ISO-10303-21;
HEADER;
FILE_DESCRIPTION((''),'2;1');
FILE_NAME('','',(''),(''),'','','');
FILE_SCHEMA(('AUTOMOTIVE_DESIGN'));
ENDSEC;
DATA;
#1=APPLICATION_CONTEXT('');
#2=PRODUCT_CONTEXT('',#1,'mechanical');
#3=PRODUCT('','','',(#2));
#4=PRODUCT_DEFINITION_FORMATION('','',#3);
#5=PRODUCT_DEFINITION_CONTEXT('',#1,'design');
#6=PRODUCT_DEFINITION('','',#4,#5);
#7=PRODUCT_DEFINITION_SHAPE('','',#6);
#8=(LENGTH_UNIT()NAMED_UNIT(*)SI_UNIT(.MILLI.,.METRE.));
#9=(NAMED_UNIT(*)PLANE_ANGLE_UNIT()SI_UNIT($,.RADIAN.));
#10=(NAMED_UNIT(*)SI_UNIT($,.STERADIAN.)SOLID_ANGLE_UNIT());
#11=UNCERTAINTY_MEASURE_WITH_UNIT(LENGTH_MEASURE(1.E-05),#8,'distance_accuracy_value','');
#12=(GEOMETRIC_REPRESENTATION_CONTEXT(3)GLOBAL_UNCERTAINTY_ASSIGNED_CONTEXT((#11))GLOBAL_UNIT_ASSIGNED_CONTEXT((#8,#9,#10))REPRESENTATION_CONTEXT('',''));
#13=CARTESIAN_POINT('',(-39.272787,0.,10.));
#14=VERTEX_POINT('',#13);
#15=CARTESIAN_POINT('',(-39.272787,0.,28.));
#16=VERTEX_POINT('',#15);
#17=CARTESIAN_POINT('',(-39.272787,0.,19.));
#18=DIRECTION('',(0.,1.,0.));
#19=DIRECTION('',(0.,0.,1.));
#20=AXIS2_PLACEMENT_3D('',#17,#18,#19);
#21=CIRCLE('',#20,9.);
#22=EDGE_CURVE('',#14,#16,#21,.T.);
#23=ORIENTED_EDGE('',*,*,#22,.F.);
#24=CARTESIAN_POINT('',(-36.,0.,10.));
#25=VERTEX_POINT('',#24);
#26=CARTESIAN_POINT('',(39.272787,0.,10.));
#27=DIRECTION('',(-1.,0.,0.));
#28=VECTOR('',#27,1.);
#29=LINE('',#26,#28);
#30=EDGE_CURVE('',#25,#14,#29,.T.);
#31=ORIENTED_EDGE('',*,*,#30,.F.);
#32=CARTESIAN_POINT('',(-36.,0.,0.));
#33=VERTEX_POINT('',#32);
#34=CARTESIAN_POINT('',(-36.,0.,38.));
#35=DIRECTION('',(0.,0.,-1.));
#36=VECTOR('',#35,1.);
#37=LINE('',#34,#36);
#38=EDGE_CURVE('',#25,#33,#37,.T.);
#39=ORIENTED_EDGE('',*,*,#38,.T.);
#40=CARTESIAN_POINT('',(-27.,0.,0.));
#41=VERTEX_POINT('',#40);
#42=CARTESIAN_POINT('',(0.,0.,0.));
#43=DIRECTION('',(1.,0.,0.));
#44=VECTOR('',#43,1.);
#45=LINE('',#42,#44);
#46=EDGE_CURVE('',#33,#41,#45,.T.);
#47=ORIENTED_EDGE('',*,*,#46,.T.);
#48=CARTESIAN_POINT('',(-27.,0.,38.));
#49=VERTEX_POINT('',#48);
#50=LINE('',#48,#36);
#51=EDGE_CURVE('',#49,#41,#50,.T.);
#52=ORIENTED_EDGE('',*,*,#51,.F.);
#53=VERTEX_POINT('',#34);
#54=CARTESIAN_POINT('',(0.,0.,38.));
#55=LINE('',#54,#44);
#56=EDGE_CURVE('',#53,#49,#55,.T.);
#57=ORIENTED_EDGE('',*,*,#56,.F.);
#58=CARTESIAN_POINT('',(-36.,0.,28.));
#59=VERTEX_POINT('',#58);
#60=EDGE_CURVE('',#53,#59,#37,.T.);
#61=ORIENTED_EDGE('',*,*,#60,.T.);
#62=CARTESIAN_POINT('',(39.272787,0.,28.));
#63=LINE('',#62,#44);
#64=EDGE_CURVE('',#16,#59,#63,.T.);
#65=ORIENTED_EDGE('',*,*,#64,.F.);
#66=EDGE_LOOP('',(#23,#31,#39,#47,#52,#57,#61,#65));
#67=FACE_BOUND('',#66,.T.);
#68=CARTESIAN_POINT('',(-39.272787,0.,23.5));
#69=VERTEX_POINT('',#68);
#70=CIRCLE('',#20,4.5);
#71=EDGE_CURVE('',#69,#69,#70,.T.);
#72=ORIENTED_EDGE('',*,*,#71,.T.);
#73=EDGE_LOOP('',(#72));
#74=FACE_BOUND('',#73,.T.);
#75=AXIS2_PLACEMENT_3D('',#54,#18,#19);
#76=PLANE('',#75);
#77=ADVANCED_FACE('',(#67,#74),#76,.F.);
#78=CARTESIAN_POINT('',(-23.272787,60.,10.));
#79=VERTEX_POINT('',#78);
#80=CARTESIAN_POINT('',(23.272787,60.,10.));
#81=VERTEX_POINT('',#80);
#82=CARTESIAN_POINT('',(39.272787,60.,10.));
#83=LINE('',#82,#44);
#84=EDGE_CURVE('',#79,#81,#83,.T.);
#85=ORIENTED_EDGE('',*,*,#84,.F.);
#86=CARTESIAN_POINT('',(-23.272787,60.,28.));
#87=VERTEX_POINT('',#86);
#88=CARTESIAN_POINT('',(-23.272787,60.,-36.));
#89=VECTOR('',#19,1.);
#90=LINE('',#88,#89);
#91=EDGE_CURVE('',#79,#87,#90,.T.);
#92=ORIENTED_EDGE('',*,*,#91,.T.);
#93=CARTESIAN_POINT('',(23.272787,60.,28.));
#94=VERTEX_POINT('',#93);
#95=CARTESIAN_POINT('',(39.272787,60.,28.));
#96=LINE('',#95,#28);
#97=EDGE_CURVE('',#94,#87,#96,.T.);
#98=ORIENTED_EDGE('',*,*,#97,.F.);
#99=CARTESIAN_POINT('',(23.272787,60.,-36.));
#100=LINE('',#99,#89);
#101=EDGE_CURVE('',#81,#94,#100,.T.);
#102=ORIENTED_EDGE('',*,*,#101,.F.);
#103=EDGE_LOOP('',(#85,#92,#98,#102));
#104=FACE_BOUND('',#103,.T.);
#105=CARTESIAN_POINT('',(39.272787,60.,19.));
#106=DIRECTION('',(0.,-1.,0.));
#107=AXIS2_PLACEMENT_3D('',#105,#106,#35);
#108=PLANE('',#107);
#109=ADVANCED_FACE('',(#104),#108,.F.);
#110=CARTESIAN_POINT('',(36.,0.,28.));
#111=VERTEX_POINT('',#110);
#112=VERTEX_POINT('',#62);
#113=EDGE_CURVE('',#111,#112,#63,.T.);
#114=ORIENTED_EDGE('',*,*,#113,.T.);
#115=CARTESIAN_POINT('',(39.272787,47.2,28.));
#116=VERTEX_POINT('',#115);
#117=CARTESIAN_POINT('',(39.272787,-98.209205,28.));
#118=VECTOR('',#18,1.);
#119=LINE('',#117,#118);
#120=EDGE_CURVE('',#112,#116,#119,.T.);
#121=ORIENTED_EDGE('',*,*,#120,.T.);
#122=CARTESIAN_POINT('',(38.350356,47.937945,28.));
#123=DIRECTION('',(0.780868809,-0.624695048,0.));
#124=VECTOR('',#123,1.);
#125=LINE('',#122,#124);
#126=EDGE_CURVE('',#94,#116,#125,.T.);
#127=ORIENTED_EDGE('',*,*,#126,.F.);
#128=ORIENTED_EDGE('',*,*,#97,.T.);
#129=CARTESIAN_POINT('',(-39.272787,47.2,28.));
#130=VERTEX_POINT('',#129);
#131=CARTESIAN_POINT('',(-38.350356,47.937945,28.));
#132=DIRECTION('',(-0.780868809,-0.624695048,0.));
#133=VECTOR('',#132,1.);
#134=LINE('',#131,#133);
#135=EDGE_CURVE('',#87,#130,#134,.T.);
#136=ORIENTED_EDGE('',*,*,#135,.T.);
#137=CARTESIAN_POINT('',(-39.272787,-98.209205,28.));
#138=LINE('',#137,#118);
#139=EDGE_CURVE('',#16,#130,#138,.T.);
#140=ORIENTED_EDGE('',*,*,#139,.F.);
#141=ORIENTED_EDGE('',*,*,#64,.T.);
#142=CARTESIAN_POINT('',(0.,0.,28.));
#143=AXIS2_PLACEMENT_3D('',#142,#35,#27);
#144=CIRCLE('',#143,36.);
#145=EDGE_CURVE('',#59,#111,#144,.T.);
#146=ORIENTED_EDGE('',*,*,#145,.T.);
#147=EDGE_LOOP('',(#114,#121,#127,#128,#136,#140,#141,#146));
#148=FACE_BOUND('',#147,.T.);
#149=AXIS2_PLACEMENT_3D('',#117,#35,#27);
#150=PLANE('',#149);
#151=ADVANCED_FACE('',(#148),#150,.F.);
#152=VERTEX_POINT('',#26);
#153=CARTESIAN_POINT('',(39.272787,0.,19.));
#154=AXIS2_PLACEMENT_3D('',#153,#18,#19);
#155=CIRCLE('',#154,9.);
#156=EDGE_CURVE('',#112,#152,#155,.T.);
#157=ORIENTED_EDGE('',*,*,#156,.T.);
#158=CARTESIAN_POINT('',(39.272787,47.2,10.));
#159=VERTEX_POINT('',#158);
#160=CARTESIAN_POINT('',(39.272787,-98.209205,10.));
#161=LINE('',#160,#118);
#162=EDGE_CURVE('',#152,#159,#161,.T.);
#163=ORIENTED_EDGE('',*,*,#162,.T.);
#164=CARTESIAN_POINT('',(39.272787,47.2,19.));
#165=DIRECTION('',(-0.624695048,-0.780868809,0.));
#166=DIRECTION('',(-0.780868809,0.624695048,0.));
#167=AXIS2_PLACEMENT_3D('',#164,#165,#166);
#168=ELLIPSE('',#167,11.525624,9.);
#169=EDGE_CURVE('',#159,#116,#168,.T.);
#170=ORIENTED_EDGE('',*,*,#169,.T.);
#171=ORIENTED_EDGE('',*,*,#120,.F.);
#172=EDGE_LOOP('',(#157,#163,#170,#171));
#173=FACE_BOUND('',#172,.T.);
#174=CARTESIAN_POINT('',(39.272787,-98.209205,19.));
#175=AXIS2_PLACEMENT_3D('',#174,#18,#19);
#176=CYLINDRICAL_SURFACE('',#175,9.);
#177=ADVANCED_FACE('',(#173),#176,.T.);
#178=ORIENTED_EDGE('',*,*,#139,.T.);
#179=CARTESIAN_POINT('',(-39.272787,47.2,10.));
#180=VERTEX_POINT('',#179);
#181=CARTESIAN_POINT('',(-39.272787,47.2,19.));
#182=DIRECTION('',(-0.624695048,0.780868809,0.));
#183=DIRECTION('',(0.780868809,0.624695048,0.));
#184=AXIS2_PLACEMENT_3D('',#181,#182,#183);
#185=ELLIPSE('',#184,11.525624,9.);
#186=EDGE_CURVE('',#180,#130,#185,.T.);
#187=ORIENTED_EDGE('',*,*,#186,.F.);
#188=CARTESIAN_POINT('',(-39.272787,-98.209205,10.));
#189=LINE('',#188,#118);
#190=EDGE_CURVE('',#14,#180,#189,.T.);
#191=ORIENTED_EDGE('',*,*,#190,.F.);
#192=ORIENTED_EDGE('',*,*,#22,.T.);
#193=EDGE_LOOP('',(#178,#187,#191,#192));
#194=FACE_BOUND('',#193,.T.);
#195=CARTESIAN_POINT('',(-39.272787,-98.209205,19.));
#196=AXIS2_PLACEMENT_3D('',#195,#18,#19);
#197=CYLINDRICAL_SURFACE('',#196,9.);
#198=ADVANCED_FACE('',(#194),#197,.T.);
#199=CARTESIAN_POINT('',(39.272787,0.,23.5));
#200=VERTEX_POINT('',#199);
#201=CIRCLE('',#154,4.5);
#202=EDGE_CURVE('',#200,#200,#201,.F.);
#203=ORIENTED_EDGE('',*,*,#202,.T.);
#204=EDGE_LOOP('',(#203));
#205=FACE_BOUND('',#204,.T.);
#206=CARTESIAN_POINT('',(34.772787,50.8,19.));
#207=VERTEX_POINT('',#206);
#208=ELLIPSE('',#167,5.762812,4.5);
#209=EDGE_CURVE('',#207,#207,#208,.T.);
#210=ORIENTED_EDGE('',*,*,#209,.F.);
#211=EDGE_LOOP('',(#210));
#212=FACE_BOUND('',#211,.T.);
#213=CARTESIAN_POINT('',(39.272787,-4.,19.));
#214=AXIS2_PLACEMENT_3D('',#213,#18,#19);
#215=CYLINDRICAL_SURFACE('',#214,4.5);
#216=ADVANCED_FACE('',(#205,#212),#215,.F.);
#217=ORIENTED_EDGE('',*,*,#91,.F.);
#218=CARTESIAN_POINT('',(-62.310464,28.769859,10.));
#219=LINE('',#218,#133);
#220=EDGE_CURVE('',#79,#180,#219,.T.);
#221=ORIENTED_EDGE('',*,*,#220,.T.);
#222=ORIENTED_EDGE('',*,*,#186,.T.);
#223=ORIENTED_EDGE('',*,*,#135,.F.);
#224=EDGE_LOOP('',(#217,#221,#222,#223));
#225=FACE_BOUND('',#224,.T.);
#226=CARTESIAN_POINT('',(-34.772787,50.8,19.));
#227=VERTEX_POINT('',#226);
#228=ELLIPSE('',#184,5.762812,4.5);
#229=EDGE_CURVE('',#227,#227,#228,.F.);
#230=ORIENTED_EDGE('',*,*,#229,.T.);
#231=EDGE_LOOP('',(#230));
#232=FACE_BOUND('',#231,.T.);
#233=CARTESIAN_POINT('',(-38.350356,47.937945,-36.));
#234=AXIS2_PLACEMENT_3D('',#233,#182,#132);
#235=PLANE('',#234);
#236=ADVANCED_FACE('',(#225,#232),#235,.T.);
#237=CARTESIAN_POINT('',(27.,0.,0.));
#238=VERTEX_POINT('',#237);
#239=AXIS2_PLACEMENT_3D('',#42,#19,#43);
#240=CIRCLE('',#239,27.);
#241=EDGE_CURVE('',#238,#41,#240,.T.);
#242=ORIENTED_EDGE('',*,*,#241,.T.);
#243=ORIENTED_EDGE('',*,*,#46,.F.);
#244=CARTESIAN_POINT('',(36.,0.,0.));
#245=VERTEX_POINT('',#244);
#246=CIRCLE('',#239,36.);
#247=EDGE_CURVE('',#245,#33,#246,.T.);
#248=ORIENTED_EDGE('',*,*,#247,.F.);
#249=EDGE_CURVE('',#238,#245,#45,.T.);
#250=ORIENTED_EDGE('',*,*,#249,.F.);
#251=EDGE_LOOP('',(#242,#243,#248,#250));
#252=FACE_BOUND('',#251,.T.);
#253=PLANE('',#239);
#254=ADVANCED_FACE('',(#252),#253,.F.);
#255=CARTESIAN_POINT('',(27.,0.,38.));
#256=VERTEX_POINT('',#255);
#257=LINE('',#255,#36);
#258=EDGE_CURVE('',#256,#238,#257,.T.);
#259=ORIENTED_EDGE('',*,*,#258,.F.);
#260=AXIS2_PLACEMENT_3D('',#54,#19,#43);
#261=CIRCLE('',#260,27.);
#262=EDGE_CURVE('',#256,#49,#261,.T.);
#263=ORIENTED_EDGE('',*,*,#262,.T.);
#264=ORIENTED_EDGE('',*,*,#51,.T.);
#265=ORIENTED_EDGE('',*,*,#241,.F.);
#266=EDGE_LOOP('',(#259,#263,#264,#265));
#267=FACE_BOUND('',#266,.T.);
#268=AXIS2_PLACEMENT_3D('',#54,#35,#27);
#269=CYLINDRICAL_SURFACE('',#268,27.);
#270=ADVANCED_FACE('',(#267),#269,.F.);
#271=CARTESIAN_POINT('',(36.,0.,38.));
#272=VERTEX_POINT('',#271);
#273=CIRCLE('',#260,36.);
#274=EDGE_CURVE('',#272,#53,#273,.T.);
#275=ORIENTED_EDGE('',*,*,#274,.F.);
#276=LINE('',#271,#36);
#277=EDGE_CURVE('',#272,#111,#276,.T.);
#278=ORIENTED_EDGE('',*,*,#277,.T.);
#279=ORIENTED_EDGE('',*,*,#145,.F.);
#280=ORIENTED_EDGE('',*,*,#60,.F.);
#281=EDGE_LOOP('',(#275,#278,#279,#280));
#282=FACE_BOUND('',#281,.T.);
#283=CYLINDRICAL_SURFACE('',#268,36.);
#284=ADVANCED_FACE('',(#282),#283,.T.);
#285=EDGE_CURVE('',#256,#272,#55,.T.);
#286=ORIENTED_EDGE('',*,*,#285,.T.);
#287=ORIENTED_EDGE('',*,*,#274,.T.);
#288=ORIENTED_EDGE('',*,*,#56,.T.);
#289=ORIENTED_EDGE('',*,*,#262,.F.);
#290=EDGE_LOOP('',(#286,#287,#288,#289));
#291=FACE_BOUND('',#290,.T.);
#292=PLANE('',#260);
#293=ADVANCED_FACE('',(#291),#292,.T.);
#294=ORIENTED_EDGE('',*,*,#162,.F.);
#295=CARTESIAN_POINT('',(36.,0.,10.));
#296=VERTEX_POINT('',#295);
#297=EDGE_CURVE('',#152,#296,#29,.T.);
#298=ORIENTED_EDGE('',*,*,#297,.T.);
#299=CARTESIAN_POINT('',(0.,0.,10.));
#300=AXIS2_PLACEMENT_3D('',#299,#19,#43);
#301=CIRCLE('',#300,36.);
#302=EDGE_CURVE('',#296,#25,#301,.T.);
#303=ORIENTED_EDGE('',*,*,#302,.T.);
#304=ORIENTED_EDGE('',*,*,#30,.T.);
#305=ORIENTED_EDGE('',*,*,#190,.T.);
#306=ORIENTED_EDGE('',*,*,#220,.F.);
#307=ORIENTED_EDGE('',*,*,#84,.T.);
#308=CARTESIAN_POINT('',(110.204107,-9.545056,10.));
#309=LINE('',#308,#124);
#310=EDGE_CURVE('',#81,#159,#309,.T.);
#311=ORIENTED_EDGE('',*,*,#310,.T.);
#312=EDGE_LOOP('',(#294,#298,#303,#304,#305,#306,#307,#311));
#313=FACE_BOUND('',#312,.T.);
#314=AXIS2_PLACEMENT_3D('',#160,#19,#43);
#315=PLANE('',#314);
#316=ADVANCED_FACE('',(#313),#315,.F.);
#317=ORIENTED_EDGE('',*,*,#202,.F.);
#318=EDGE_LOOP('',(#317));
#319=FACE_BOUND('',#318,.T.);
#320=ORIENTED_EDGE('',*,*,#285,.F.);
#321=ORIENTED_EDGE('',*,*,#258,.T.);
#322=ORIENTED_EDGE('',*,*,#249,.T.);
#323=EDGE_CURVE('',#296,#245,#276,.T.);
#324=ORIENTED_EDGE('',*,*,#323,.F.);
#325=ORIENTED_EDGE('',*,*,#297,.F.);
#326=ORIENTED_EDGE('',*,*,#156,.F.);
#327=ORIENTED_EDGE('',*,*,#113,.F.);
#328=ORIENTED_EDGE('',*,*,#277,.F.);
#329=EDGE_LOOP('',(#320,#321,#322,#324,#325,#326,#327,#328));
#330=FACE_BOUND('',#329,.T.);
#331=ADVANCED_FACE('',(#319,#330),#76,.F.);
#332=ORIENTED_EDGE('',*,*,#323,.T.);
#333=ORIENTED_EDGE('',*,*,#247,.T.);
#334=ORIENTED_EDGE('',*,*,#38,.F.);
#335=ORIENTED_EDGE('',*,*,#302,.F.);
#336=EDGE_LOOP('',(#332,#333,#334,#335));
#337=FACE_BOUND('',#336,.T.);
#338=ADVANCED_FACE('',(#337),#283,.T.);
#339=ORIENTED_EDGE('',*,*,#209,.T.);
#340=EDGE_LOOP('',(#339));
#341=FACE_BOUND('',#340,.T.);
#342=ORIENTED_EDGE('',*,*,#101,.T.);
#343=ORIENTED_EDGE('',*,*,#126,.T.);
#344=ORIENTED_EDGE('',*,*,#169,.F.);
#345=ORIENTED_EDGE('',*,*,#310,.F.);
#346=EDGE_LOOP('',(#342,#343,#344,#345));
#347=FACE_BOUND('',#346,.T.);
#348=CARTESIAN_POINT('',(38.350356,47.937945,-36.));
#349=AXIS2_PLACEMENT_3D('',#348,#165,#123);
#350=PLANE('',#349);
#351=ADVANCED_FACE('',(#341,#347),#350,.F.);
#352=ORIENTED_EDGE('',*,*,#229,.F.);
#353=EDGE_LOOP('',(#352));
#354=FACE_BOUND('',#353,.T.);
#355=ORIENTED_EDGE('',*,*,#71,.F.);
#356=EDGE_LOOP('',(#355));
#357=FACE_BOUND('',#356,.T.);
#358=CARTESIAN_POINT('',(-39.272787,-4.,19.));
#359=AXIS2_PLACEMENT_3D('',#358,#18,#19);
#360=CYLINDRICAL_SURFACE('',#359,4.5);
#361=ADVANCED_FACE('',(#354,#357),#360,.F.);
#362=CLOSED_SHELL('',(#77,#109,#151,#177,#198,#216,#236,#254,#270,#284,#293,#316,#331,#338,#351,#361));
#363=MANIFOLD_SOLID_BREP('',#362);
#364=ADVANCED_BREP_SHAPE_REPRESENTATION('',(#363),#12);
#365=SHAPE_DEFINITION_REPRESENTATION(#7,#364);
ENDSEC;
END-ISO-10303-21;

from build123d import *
from build123d.topology import SkipClean

# Parameters (mm, degrees)
BOSS_EXTRUDE1_DEPTH = 38
BOSS_EXTRUDE2_REACH = 81.624
CUT_EXTRUDE1_START  = -38
SKETCH3_R           = 27
CUT_EXTRUDE1_DEPTH  = 38
SKETCH4_R           = 4.5
CUT_EXTRUDE2_DEPTH  = 64
CUT_EXTRUDE3_DEPTH  = 64


with BuildPart() as part:
    # Sketch1 → Boss-Extrude1 (new body)
    with BuildSketch(Plane.XY):
        with BuildLine():
            ThreePointArc((36, 0), (0, 36), (-36, 0))
            Line((-36, 0), (-27, 0))
            ThreePointArc((-27, 0), (0, 27), (27, 0))
            Line((27, 0), (36, 0))
        make_face()
    extrude(amount=BOSS_EXTRUDE1_DEPTH)

    # Boss-Extrude2: up to this face of the body (flat: up to its plane)
    boss_extrude2_end = Plane(part.part.faces().sort_by_distance((31.5, 0, 19))[0])
    # Sketch2 → Boss-Extrude2 (add, up to the picked face)
    with BuildSketch(Plane(origin=(0, 60, 0), x_dir=(-1, 0, 0), z_dir=(0, -1, 0)), mode=Mode.PRIVATE) as boss_extrude2_sk1:
        with BuildLine():
            Line((-39.272787465, -10), (39.272787465, -10))
            ThreePointArc((39.272787465, -10), (48.272787465, -19), (39.272787465, -28))
            Line((39.272787465, -28), (-39.272787465, -28))
            ThreePointArc((-39.272787465, -28), (-48.272787465, -19), (-39.272787465, -10))
        make_face()
    boss_extrude2_tool1 = split(extrude(boss_extrude2_sk1.sketch, amount=BOSS_EXTRUDE2_REACH, mode=Mode.PRIVATE), bisect_by=boss_extrude2_end, keep=Keep.BOTH, mode=Mode.PRIVATE)
    add(boss_extrude2_tool1.solids().sort_by(Axis((0, 60, 19), (0, -1, 0)))[0])

    # Sketch3 → Cut-Extrude1 (cut)
    with SkipClean():  # the faces are left unmerged after this step: merging them gives an invalid solid
        with BuildSketch(Plane.XY.offset(28).offset(CUT_EXTRUDE1_START)):
            Circle(SKETCH3_R)
        extrude(amount=CUT_EXTRUDE1_DEPTH, mode=Mode.SUBTRACT)
    add(part.part.scale(1), mode=Mode.REPLACE)  # the faces are merged on a copy

    # Sketch4 → Cut-Extrude2 (cut)
    with BuildSketch(Plane(origin=(0, 60, 0), x_dir=(1, 0, 0), z_dir=(0, 1, 0))):
        with Locations(Location((-39.272787465, -19, 0), (0, 0, 270))):
            Circle(SKETCH4_R)
    cut_extrude2 = extrude(amount=-CUT_EXTRUDE2_DEPTH, mode=Mode.SUBTRACT)

    # Mirror1: Cut-Extrude2 across plane
    add(cut_extrude2.mirror(Plane(origin=(0, 0, 0), x_dir=(0, 0, 1), z_dir=(1, 0, 0))), mode=Mode.SUBTRACT)

    # Sketch6 → Cut-Extrude3 (cut)
    with BuildSketch(Plane.XY.offset(28)):
        Polygon((-48.272787465, 40), (-39.272787465, 47.2), (-39.272787465, 60), (-48.272787465, 60), align=None)
        Polygon((-39.272787465, 47.2), (-23.272787465, 60), (-39.272787465, 60), align=None)
    cut_extrude3 = extrude(amount=-CUT_EXTRUDE3_DEPTH, mode=Mode.SUBTRACT)

    # Mirror2: Cut-Extrude3 across plane
    add(cut_extrude3.mirror(Plane(origin=(0, 0, 0), x_dir=(0, 0, 1), z_dir=(1, 0, 0))), mode=Mode.SUBTRACT)


solid = part.part
